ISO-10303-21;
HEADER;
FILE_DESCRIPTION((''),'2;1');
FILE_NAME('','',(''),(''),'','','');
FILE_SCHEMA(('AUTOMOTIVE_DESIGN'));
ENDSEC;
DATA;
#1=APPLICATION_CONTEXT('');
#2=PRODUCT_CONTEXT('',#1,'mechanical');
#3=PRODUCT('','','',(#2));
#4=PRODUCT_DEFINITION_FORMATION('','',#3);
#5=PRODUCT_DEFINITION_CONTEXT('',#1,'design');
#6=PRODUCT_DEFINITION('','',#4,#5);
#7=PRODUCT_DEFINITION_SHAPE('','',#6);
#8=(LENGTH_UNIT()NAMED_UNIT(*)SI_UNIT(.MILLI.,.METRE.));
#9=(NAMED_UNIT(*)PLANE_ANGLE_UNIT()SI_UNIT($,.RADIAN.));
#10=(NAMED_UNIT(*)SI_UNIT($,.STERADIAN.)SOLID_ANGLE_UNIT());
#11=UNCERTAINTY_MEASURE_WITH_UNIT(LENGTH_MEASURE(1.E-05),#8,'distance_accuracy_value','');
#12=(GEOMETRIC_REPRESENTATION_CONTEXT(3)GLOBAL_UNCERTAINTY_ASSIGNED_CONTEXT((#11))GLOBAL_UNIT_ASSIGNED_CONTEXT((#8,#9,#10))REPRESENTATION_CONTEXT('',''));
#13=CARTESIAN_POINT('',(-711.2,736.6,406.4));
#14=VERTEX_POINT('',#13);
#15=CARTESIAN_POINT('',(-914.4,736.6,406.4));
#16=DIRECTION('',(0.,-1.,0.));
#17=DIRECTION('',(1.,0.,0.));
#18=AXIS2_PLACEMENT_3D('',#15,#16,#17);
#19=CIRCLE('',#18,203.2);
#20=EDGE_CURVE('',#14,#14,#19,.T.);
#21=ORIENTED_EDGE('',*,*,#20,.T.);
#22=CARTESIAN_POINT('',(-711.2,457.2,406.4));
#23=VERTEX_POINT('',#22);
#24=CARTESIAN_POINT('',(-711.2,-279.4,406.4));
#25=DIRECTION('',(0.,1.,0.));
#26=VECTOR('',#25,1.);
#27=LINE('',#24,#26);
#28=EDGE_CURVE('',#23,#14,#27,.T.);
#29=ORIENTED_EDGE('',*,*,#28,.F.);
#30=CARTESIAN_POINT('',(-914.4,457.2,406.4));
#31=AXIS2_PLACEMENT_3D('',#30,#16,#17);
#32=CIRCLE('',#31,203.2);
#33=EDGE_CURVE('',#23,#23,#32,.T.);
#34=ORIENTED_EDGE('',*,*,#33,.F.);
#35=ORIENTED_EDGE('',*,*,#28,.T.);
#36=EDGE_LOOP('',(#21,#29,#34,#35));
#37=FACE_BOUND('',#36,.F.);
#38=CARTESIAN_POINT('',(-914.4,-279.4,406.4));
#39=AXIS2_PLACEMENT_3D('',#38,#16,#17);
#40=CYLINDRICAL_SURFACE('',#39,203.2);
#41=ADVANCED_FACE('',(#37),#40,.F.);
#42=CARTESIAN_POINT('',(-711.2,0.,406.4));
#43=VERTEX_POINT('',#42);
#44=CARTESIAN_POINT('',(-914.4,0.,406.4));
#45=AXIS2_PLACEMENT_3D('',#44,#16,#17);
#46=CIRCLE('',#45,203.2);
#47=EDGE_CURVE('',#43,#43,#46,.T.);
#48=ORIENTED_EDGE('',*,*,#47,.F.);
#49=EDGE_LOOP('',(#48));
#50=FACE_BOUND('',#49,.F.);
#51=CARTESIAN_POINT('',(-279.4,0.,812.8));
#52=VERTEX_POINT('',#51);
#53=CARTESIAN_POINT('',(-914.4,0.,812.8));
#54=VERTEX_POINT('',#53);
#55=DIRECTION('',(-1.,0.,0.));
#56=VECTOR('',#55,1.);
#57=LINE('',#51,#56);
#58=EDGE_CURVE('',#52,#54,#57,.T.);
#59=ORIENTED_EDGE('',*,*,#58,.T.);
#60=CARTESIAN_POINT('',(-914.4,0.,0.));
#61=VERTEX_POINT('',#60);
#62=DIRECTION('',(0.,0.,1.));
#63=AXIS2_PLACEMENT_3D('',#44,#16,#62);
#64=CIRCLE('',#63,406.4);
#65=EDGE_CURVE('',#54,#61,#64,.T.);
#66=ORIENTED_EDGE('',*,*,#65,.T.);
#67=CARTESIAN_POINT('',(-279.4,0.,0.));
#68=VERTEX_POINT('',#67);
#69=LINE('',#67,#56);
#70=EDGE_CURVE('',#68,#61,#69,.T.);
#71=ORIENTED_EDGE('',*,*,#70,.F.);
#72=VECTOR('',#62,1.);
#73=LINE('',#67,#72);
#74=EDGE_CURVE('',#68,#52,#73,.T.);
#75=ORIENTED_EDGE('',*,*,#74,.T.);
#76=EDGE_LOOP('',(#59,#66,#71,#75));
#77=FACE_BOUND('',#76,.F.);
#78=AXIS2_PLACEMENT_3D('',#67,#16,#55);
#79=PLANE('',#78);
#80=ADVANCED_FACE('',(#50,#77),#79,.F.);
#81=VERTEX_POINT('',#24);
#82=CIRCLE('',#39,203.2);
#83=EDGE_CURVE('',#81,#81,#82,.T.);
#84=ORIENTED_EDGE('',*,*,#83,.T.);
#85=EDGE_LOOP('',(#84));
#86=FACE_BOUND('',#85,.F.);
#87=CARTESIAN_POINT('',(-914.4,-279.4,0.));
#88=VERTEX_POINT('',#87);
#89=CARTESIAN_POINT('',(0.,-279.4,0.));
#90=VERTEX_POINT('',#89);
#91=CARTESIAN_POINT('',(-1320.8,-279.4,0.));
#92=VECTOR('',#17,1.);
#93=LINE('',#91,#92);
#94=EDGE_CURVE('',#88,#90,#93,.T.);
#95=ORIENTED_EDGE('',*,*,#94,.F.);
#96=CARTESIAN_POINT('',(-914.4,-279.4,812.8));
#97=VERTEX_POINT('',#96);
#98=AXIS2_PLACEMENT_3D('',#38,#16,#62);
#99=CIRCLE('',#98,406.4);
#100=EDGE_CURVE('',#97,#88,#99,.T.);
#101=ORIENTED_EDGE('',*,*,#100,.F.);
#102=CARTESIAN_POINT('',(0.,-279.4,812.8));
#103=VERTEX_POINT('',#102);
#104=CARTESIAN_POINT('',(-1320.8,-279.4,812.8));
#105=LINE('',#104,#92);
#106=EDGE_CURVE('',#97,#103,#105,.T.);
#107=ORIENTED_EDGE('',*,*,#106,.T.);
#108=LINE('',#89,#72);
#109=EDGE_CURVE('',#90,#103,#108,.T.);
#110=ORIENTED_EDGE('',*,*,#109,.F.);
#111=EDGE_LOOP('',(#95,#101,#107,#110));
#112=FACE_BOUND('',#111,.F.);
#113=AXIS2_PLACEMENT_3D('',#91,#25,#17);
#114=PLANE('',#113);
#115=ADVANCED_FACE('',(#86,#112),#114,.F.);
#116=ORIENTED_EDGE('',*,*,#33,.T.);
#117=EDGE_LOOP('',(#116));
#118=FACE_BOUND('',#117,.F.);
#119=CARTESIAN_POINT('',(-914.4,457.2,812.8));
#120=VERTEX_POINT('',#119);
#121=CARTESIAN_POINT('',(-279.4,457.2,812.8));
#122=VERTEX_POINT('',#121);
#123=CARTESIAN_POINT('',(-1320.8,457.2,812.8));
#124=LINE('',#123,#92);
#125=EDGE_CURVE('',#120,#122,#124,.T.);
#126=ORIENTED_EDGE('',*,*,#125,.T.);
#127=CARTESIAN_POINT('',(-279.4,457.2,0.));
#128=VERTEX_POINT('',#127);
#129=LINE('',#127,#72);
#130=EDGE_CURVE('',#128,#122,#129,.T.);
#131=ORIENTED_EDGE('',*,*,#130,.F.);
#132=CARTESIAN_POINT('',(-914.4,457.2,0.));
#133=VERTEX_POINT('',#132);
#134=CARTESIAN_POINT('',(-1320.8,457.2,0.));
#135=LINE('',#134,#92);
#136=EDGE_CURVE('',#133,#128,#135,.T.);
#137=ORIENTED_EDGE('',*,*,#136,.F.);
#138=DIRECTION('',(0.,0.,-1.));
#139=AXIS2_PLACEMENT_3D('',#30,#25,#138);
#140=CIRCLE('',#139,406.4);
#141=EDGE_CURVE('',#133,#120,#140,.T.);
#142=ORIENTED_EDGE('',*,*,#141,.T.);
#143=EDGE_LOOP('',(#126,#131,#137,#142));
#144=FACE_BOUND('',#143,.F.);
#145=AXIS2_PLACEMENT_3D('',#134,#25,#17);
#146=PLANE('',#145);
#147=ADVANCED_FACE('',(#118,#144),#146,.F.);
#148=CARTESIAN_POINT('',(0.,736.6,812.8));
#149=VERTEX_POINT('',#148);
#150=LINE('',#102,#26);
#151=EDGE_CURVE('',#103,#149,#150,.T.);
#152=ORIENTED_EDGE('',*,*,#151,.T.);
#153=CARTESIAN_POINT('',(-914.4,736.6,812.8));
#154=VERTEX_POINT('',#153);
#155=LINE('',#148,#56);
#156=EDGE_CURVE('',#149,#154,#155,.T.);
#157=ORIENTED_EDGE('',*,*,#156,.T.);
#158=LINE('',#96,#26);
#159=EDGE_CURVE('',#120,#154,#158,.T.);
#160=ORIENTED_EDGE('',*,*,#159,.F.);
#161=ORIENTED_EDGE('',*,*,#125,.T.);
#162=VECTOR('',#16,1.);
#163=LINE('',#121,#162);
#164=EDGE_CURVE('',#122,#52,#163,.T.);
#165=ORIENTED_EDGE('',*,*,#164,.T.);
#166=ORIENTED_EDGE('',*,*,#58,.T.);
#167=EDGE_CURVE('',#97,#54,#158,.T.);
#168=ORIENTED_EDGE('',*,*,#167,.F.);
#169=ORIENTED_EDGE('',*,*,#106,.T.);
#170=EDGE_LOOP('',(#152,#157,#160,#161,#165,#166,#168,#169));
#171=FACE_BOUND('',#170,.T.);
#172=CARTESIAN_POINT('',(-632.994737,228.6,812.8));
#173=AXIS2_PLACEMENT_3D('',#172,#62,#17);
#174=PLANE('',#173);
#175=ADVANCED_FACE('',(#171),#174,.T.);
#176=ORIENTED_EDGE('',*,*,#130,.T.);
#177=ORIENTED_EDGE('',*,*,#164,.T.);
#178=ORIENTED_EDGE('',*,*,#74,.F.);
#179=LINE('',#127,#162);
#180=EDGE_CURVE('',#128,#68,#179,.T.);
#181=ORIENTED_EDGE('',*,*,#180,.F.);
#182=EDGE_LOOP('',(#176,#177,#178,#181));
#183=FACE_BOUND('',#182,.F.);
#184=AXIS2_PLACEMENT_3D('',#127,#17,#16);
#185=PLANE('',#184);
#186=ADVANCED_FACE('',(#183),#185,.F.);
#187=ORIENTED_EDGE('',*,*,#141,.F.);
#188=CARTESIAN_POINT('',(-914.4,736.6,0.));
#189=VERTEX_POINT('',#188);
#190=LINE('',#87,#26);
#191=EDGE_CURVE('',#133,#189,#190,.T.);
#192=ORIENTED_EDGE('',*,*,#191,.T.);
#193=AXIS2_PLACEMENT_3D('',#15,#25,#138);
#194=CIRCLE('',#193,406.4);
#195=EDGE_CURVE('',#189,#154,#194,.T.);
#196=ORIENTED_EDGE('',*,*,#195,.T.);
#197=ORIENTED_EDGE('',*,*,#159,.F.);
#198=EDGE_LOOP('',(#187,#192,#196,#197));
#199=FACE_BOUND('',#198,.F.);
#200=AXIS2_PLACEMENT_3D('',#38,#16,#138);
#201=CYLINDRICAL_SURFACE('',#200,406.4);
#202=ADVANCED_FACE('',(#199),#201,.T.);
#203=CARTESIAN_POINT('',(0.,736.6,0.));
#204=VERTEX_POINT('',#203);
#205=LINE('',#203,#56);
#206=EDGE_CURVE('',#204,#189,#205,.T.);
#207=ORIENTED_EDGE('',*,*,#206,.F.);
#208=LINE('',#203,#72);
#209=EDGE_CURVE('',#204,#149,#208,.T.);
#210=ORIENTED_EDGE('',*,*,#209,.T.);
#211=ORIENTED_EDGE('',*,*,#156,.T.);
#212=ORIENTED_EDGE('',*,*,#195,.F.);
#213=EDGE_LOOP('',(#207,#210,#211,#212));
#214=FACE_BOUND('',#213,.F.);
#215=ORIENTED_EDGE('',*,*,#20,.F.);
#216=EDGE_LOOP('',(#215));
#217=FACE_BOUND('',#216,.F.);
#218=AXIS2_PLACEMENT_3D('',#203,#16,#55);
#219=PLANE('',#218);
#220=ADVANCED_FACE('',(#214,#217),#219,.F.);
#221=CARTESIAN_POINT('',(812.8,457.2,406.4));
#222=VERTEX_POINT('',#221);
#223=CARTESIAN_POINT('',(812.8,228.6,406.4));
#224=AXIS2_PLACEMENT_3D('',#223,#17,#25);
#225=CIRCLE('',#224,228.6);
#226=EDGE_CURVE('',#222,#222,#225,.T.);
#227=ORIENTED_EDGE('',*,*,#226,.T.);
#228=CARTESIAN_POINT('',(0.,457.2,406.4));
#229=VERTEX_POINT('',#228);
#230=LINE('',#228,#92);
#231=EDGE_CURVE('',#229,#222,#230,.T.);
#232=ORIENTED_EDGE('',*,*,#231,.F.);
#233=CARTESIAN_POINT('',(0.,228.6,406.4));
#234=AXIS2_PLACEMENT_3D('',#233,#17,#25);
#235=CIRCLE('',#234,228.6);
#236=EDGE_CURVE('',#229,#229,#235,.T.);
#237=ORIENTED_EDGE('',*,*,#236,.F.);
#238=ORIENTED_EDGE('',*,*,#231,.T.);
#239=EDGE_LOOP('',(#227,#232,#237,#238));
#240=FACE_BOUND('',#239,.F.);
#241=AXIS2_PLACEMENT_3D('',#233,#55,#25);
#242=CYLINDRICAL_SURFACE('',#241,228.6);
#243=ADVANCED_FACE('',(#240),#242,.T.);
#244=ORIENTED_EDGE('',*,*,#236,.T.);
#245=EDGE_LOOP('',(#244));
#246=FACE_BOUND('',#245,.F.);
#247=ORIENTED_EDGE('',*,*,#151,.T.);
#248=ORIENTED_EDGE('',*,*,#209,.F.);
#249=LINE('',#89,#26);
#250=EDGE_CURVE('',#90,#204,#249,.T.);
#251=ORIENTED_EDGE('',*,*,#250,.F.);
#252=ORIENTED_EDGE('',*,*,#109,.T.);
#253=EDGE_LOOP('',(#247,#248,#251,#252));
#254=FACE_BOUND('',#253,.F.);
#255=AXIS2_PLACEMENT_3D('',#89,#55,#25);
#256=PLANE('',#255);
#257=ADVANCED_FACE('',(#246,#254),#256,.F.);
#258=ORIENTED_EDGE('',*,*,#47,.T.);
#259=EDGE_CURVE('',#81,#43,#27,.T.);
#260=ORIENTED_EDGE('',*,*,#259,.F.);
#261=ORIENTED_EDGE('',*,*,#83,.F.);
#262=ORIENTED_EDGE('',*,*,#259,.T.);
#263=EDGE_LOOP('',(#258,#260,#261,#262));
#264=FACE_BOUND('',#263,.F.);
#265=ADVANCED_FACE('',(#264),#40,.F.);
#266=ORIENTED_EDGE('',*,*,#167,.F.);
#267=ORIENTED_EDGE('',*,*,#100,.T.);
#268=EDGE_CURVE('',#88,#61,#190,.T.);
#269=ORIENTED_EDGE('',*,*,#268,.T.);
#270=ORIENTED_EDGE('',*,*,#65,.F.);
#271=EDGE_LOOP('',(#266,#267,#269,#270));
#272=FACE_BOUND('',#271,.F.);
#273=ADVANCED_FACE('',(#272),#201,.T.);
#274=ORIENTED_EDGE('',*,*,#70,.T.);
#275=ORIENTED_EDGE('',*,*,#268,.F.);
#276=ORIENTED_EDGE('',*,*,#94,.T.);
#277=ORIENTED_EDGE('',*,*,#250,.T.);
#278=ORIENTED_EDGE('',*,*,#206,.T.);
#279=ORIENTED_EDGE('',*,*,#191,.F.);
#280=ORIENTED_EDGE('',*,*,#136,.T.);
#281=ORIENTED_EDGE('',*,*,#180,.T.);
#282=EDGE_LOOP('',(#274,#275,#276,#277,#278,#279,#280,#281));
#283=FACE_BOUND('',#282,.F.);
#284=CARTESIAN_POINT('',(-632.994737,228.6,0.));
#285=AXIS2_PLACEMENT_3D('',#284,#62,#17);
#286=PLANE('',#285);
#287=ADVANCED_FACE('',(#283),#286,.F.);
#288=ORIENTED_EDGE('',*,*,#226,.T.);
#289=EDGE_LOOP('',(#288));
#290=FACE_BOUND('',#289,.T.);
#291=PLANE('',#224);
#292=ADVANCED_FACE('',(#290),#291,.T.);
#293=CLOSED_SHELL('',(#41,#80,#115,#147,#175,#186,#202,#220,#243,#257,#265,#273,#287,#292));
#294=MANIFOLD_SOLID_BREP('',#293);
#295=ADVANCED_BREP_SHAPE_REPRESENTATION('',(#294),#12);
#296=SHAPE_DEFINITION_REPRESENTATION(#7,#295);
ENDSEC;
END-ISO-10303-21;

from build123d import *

# Parameters (mm, degrees)
F1_DEPTH = 812.8
F2_R     = 203.2
F3_DEPTH = 1016.001
F4_R     = 228.6
F5_DEPTH = 812.8


# Not quite as in the source:
# - a feature names something its author has since deleted; it is built from what else it names


with BuildPart() as f1:
    # F0 (on Top) → F1 (new body)
    with BuildSketch(Plane.XY):
        Polygon((0, -279.4), (0, 0), (0, 736.6), (-1320.8, 736.6), (-1320.8, 457.2), (-279.4, 457.2), (-279.4, 0), (-1320.8, 0), (-1320.8, -279.4), align=None)
    extrude(amount=F1_DEPTH)

    # F2 (on face) → F3 (cut, through all)
    with BuildSketch(Plane.XZ.offset(279.4)):
        with BuildLine():
            ThreePointArc((-1320.8, 406.4), (-1201.7681958742, 693.7681958742), (-914.4, 812.8))
            Line((-914.4, 812.8), (-1320.8, 812.8))
            Line((-1320.8, 812.8), (-1320.8, 406.4))
        make_face()
        with BuildLine():
            ThreePointArc((-914.4, 0), (-1201.7681958742, 119.0318041258), (-1320.8, 406.4))
            Line((-1320.8, 406.4), (-1320.8, 0))
            Line((-1320.8, 0), (-914.4, 0))
        make_face()
        with Locations((-914.4, 406.4)):
            Circle(F2_R)
    extrude(amount=-F3_DEPTH, mode=Mode.SUBTRACT)

    # F4 (on face) → F5 (join)
    with BuildSketch(Plane.YZ):
        with Locations((228.6, 406.4)):
            Circle(F4_R)
    extrude(amount=F5_DEPTH)


solid = f1.part
